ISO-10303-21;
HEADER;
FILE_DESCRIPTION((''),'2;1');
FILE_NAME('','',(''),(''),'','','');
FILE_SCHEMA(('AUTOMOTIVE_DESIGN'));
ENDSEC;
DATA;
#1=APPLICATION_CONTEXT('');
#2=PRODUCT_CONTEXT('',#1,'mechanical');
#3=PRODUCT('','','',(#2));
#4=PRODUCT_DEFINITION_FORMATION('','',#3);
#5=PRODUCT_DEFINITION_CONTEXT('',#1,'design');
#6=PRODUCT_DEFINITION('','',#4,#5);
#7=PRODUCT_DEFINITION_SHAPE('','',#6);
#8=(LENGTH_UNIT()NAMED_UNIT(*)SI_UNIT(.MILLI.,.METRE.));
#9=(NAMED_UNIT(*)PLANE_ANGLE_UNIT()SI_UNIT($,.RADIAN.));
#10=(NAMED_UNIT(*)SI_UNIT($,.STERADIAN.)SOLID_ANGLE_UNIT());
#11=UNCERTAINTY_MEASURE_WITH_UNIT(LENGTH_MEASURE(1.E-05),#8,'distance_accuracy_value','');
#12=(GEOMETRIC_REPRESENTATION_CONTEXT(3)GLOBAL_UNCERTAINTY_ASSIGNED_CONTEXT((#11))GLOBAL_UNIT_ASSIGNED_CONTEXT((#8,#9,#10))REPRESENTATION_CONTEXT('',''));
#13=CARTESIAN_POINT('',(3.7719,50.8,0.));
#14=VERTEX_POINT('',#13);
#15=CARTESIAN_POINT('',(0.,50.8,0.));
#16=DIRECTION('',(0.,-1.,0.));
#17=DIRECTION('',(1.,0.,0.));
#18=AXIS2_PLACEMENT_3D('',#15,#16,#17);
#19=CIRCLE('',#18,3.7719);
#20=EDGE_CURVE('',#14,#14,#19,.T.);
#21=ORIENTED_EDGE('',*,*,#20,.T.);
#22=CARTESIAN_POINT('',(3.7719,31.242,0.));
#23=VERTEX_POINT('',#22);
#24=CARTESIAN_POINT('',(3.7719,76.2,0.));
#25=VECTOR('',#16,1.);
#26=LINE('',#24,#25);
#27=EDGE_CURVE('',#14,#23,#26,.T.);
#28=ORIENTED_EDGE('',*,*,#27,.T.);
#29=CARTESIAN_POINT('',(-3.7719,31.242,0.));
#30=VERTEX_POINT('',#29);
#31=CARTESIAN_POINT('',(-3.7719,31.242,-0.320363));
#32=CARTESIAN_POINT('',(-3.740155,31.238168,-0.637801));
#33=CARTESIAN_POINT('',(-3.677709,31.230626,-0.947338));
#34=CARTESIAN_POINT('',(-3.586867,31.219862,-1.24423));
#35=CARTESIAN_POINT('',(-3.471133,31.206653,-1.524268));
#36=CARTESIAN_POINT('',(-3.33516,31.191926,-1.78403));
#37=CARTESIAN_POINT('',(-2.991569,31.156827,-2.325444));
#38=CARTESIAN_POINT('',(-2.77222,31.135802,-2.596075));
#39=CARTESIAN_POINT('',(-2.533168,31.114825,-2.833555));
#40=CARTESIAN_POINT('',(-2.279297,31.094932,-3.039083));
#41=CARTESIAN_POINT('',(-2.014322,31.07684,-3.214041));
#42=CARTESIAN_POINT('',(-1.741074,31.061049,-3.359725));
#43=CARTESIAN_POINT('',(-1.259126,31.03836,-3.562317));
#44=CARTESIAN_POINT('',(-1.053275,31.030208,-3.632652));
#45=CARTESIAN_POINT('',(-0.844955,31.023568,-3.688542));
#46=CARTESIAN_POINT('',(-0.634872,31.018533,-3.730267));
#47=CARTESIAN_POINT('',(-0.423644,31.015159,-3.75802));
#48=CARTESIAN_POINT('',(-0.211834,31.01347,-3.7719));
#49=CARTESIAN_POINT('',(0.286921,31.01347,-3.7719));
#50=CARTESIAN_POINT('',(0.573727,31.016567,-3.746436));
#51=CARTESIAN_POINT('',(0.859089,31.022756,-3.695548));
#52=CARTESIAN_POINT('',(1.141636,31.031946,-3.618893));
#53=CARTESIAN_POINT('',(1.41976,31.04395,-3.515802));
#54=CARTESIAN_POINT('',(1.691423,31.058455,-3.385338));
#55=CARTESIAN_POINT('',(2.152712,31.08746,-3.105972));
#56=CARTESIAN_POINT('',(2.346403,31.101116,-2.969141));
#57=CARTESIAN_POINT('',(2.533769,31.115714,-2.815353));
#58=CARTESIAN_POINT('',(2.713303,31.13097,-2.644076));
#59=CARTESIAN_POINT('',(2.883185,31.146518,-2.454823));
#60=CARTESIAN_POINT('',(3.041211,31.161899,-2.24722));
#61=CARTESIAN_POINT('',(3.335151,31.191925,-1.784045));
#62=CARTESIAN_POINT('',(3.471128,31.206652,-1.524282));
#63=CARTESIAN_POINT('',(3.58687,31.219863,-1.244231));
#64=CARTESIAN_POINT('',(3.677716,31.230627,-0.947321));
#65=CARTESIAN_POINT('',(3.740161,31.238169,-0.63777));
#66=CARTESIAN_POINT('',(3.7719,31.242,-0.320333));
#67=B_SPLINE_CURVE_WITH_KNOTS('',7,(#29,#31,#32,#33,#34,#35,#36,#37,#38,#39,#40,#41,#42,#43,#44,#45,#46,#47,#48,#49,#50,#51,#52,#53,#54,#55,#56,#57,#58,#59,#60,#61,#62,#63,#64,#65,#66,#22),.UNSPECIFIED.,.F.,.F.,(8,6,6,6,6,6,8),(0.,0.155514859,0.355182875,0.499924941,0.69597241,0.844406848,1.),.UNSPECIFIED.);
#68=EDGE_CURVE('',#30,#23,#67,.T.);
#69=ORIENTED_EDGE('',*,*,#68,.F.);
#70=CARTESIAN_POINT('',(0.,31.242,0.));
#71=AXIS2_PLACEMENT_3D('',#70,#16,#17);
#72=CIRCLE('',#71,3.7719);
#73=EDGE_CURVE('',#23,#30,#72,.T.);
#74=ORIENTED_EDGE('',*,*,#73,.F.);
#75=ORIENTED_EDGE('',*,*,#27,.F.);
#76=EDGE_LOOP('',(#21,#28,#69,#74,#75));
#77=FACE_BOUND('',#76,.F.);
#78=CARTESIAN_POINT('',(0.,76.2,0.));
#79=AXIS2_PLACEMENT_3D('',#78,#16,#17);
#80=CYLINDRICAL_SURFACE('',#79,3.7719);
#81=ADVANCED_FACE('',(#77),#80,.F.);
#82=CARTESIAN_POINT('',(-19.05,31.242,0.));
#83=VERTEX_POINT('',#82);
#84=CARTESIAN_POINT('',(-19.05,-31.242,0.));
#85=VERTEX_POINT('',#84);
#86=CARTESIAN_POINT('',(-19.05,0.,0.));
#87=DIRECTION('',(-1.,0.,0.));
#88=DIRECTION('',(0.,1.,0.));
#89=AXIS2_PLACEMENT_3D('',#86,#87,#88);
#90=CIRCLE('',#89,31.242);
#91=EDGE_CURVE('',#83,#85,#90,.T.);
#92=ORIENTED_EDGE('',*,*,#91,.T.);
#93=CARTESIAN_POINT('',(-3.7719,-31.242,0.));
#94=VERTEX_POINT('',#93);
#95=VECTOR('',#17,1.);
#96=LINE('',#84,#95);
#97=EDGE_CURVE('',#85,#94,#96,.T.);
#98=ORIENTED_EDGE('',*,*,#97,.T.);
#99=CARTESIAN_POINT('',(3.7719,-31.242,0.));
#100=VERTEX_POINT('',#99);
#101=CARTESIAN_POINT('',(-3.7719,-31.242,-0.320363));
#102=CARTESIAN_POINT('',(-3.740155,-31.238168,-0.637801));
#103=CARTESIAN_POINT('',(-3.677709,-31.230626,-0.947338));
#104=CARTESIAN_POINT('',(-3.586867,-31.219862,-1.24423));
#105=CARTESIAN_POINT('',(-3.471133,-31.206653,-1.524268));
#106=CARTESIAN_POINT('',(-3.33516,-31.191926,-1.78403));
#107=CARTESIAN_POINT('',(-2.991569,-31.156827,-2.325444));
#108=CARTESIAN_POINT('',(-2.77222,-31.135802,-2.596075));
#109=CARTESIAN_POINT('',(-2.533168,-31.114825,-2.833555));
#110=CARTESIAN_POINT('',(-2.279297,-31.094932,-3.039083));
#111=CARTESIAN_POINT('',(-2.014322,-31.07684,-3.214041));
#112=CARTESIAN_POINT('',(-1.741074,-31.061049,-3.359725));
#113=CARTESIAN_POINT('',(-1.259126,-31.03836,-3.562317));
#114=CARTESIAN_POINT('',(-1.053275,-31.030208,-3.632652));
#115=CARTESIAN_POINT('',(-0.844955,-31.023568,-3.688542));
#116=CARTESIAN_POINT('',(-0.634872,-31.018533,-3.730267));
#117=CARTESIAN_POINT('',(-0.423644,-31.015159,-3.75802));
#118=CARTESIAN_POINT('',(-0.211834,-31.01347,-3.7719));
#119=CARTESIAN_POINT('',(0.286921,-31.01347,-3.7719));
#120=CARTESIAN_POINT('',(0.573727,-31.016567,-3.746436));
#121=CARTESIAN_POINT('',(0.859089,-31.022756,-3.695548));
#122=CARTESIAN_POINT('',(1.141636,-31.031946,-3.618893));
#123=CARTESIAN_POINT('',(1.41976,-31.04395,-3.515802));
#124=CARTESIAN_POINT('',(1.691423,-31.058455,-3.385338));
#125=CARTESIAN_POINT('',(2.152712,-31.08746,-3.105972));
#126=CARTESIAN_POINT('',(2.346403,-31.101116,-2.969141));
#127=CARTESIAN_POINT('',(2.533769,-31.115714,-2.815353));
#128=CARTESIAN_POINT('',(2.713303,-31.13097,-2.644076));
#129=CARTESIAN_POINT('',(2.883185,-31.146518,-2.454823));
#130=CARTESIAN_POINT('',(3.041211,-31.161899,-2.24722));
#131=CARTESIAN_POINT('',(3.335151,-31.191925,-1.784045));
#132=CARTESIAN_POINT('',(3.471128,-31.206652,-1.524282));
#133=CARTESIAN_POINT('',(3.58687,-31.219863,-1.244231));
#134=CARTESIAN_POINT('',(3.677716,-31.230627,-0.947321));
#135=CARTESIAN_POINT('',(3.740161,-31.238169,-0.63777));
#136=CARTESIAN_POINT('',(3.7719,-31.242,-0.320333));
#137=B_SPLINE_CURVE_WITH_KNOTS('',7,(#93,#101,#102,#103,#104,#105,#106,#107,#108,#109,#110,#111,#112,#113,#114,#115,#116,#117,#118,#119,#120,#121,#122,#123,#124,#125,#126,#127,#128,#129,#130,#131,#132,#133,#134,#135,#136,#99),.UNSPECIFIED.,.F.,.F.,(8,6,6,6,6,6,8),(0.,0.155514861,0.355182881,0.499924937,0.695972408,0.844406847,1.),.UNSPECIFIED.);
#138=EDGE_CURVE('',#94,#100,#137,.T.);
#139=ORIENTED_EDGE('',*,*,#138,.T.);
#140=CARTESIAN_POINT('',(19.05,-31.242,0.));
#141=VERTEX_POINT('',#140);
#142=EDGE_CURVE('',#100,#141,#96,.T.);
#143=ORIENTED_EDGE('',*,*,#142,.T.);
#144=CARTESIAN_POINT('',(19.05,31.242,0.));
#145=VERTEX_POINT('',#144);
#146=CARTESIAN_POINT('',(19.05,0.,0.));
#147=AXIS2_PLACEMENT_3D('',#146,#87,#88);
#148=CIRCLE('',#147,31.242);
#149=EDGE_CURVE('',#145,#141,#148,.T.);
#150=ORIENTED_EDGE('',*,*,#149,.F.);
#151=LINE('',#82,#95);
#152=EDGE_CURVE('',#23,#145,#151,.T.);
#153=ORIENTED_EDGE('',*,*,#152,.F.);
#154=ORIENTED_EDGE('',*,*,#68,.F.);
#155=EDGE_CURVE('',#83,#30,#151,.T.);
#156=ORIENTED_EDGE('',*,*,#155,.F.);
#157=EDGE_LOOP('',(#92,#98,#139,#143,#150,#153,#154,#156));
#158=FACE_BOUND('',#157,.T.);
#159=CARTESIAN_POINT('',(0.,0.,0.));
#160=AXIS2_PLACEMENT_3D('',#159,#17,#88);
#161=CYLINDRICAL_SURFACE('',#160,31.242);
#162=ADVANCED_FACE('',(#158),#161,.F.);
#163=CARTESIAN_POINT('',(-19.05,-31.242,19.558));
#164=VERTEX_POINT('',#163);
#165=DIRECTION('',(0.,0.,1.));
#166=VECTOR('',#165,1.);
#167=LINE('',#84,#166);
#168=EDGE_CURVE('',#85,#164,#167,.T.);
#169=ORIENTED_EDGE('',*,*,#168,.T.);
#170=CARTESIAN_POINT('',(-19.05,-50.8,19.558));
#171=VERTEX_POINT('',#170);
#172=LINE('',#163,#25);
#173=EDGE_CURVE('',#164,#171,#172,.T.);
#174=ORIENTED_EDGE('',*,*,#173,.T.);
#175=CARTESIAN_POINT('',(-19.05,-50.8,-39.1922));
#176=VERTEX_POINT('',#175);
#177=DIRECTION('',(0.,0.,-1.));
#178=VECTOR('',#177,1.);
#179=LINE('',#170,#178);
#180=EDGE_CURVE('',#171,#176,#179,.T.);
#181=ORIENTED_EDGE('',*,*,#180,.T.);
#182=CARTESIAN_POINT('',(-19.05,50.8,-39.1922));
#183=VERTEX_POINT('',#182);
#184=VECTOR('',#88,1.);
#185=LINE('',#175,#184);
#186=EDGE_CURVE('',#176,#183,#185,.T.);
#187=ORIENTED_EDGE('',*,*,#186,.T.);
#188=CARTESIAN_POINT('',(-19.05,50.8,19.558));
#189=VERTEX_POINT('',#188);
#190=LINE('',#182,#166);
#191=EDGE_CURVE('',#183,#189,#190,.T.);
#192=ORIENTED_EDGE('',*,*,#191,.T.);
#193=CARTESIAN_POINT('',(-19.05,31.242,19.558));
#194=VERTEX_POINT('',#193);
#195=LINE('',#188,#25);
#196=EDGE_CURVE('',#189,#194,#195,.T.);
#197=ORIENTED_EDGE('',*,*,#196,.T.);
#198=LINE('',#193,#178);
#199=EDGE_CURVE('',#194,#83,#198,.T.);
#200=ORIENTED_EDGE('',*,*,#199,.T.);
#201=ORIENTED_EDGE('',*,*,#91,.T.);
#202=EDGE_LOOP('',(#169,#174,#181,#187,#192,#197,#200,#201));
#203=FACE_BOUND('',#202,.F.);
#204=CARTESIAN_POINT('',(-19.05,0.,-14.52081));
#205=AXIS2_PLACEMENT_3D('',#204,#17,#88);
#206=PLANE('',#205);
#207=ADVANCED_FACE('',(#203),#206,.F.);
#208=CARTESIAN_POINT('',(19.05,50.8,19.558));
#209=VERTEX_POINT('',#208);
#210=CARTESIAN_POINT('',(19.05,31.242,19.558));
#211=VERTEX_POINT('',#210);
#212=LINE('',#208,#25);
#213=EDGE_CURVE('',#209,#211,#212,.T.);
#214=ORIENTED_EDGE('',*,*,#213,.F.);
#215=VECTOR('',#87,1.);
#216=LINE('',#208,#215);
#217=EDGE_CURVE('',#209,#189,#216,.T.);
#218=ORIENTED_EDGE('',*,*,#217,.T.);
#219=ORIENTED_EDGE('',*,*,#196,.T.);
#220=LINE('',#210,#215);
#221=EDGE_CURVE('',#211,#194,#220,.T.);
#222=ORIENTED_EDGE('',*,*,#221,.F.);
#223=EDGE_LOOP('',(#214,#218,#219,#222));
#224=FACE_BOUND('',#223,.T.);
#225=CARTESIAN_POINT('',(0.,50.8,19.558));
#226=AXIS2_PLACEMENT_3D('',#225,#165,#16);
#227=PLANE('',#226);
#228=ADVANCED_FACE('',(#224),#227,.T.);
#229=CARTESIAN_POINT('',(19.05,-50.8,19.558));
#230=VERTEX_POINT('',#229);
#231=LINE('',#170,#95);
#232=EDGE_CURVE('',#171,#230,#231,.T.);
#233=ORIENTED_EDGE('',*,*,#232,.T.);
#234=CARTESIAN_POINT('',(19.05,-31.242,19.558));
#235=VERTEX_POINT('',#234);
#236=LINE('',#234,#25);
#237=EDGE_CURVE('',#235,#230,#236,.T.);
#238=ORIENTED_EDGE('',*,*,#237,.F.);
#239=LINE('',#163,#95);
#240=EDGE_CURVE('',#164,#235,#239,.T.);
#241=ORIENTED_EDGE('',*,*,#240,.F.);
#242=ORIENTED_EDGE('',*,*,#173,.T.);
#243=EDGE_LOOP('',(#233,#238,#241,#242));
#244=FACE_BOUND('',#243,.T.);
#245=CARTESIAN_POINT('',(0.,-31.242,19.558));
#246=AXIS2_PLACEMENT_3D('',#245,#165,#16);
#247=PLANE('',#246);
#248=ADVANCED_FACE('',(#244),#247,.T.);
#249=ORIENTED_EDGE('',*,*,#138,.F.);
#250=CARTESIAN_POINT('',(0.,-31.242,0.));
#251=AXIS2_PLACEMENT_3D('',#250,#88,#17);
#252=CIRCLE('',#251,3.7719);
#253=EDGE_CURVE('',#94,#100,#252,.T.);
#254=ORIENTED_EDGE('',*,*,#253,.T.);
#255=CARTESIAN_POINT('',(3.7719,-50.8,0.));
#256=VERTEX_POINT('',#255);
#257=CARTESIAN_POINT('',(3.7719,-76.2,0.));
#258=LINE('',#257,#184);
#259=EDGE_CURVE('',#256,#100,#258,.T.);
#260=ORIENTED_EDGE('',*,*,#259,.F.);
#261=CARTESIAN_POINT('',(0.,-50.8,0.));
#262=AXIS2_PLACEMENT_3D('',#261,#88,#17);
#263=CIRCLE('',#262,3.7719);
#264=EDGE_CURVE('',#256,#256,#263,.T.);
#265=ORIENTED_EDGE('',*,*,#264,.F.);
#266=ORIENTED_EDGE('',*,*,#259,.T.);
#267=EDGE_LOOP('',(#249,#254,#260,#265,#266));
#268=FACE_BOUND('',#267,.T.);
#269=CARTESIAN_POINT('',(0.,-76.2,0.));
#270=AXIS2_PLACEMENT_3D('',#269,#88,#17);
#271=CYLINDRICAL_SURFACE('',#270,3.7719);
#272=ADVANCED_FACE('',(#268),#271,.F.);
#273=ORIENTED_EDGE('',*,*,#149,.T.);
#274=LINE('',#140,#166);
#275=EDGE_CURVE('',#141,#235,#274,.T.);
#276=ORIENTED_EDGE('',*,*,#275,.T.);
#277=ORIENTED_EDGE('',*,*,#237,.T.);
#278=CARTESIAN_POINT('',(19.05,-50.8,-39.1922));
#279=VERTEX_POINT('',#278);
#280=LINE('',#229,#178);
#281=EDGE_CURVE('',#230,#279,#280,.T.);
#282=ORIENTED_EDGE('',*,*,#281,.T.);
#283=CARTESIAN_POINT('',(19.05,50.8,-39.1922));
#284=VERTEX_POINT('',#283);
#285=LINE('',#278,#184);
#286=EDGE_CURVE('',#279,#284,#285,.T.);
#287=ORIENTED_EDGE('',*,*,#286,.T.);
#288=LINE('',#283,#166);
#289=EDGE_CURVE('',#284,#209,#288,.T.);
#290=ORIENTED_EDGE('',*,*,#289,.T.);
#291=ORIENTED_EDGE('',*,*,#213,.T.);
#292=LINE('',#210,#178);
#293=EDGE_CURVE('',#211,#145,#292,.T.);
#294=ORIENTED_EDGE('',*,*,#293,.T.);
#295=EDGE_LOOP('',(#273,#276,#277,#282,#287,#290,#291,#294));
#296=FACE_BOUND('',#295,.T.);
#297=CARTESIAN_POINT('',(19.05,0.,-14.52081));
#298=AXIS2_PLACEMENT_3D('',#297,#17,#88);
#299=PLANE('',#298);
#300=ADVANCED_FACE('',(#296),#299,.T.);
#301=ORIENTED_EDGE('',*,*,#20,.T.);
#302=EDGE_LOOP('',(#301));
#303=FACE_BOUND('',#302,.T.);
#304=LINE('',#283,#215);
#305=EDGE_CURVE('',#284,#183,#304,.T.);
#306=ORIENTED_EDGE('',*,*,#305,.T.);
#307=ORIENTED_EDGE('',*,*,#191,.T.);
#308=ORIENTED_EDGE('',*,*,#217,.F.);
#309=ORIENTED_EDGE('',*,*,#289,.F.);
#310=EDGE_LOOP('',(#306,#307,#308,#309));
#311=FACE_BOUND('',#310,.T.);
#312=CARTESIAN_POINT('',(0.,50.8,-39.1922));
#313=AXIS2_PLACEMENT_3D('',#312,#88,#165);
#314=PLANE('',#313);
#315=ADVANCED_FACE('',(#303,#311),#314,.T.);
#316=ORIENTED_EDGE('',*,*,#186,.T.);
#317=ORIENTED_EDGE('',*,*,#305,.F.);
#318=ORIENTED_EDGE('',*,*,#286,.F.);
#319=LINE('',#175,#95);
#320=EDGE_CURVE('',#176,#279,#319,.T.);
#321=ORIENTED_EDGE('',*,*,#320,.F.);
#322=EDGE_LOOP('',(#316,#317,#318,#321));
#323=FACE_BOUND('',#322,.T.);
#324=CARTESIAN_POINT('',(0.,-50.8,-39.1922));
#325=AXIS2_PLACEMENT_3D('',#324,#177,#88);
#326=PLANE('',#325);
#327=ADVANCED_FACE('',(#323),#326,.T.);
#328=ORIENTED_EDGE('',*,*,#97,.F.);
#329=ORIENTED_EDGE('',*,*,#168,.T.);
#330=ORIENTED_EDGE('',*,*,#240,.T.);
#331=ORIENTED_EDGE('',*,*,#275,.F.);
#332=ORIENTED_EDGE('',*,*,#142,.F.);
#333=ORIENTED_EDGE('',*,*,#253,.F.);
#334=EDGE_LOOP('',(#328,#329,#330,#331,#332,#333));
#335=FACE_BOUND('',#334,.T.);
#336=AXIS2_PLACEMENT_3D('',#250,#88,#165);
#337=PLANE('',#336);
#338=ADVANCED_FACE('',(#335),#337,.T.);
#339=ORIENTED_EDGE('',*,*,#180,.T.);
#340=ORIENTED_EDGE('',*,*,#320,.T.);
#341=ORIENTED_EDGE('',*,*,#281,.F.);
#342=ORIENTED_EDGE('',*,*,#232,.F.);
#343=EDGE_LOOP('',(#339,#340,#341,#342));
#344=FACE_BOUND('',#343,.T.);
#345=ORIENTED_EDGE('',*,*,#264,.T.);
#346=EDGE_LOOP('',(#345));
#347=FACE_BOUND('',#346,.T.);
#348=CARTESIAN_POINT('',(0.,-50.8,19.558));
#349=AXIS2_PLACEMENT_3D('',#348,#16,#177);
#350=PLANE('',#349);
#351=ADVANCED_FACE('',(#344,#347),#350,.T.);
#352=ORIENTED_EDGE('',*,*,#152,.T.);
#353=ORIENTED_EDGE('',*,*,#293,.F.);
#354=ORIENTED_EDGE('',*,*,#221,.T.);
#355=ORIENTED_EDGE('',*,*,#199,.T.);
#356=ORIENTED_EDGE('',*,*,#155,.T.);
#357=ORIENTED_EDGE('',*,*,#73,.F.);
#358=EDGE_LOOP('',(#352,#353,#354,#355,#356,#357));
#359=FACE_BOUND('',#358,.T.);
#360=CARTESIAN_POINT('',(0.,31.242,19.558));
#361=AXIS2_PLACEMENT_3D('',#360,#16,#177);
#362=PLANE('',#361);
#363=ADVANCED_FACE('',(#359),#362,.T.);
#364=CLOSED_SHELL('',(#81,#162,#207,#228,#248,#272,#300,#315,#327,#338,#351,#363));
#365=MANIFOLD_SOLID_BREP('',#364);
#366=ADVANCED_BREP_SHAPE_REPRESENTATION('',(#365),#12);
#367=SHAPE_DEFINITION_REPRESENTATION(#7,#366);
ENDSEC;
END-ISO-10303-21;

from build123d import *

# Parameters (mm, degrees)
F1_DEPTH = 19.05
F3_D     = 7.5438
F3_DEPTH = 25.4
F3_TIP   = 2.2663861689


# Not quite as in the source:
# - a pattern or mirror of a feature is missing from the dataset's text; its kind, count and spacing are read off the source's solid


with BuildPart() as f1:
    # F0 (on Right) → F1 (new body, symmetric)
    with BuildSketch(Plane.YZ):
        with BuildLine():
            Line((31.242, 19.558), (31.242, 0))
            ThreePointArc((31.242, 0), (0, -31.242), (-31.242, 0))
            Line((-31.242, 0), (-31.242, 19.558))
            Line((-31.242, 19.558), (-50.8, 19.558))
            Line((-50.8, 19.558), (-50.8, -39.1922))
            Line((-50.8, -39.1922), (0, -39.1922))
            Line((0, -39.1922), (50.8, -39.1922))
            Line((50.8, -39.1922), (50.8, 19.558))
            Line((50.8, 19.558), (31.242, 19.558))
        make_face()
    extrude(amount=F1_DEPTH, both=True)

    # F3
    with Locations(Plane(origin=(0, 50.8, 0), x_dir=(-1, 0, 0), z_dir=(0, 1, 0))):
        with Locations((0, 0)):
            f3 = Hole(F3_D / 2, depth=F3_DEPTH)
            with Locations((0, 0, -(F3_DEPTH + F3_TIP / 2))):  # 118° drill point
                Cone(0, F3_D / 2, F3_TIP, mode=Mode.SUBTRACT)

    # F3_copies: F3 across plane
    add(f3.mirror(Plane(origin=(0, 0, 0), x_dir=(0, 0, -1), z_dir=(0, -1, 0))), mode=Mode.SUBTRACT)


solid = f1.part
